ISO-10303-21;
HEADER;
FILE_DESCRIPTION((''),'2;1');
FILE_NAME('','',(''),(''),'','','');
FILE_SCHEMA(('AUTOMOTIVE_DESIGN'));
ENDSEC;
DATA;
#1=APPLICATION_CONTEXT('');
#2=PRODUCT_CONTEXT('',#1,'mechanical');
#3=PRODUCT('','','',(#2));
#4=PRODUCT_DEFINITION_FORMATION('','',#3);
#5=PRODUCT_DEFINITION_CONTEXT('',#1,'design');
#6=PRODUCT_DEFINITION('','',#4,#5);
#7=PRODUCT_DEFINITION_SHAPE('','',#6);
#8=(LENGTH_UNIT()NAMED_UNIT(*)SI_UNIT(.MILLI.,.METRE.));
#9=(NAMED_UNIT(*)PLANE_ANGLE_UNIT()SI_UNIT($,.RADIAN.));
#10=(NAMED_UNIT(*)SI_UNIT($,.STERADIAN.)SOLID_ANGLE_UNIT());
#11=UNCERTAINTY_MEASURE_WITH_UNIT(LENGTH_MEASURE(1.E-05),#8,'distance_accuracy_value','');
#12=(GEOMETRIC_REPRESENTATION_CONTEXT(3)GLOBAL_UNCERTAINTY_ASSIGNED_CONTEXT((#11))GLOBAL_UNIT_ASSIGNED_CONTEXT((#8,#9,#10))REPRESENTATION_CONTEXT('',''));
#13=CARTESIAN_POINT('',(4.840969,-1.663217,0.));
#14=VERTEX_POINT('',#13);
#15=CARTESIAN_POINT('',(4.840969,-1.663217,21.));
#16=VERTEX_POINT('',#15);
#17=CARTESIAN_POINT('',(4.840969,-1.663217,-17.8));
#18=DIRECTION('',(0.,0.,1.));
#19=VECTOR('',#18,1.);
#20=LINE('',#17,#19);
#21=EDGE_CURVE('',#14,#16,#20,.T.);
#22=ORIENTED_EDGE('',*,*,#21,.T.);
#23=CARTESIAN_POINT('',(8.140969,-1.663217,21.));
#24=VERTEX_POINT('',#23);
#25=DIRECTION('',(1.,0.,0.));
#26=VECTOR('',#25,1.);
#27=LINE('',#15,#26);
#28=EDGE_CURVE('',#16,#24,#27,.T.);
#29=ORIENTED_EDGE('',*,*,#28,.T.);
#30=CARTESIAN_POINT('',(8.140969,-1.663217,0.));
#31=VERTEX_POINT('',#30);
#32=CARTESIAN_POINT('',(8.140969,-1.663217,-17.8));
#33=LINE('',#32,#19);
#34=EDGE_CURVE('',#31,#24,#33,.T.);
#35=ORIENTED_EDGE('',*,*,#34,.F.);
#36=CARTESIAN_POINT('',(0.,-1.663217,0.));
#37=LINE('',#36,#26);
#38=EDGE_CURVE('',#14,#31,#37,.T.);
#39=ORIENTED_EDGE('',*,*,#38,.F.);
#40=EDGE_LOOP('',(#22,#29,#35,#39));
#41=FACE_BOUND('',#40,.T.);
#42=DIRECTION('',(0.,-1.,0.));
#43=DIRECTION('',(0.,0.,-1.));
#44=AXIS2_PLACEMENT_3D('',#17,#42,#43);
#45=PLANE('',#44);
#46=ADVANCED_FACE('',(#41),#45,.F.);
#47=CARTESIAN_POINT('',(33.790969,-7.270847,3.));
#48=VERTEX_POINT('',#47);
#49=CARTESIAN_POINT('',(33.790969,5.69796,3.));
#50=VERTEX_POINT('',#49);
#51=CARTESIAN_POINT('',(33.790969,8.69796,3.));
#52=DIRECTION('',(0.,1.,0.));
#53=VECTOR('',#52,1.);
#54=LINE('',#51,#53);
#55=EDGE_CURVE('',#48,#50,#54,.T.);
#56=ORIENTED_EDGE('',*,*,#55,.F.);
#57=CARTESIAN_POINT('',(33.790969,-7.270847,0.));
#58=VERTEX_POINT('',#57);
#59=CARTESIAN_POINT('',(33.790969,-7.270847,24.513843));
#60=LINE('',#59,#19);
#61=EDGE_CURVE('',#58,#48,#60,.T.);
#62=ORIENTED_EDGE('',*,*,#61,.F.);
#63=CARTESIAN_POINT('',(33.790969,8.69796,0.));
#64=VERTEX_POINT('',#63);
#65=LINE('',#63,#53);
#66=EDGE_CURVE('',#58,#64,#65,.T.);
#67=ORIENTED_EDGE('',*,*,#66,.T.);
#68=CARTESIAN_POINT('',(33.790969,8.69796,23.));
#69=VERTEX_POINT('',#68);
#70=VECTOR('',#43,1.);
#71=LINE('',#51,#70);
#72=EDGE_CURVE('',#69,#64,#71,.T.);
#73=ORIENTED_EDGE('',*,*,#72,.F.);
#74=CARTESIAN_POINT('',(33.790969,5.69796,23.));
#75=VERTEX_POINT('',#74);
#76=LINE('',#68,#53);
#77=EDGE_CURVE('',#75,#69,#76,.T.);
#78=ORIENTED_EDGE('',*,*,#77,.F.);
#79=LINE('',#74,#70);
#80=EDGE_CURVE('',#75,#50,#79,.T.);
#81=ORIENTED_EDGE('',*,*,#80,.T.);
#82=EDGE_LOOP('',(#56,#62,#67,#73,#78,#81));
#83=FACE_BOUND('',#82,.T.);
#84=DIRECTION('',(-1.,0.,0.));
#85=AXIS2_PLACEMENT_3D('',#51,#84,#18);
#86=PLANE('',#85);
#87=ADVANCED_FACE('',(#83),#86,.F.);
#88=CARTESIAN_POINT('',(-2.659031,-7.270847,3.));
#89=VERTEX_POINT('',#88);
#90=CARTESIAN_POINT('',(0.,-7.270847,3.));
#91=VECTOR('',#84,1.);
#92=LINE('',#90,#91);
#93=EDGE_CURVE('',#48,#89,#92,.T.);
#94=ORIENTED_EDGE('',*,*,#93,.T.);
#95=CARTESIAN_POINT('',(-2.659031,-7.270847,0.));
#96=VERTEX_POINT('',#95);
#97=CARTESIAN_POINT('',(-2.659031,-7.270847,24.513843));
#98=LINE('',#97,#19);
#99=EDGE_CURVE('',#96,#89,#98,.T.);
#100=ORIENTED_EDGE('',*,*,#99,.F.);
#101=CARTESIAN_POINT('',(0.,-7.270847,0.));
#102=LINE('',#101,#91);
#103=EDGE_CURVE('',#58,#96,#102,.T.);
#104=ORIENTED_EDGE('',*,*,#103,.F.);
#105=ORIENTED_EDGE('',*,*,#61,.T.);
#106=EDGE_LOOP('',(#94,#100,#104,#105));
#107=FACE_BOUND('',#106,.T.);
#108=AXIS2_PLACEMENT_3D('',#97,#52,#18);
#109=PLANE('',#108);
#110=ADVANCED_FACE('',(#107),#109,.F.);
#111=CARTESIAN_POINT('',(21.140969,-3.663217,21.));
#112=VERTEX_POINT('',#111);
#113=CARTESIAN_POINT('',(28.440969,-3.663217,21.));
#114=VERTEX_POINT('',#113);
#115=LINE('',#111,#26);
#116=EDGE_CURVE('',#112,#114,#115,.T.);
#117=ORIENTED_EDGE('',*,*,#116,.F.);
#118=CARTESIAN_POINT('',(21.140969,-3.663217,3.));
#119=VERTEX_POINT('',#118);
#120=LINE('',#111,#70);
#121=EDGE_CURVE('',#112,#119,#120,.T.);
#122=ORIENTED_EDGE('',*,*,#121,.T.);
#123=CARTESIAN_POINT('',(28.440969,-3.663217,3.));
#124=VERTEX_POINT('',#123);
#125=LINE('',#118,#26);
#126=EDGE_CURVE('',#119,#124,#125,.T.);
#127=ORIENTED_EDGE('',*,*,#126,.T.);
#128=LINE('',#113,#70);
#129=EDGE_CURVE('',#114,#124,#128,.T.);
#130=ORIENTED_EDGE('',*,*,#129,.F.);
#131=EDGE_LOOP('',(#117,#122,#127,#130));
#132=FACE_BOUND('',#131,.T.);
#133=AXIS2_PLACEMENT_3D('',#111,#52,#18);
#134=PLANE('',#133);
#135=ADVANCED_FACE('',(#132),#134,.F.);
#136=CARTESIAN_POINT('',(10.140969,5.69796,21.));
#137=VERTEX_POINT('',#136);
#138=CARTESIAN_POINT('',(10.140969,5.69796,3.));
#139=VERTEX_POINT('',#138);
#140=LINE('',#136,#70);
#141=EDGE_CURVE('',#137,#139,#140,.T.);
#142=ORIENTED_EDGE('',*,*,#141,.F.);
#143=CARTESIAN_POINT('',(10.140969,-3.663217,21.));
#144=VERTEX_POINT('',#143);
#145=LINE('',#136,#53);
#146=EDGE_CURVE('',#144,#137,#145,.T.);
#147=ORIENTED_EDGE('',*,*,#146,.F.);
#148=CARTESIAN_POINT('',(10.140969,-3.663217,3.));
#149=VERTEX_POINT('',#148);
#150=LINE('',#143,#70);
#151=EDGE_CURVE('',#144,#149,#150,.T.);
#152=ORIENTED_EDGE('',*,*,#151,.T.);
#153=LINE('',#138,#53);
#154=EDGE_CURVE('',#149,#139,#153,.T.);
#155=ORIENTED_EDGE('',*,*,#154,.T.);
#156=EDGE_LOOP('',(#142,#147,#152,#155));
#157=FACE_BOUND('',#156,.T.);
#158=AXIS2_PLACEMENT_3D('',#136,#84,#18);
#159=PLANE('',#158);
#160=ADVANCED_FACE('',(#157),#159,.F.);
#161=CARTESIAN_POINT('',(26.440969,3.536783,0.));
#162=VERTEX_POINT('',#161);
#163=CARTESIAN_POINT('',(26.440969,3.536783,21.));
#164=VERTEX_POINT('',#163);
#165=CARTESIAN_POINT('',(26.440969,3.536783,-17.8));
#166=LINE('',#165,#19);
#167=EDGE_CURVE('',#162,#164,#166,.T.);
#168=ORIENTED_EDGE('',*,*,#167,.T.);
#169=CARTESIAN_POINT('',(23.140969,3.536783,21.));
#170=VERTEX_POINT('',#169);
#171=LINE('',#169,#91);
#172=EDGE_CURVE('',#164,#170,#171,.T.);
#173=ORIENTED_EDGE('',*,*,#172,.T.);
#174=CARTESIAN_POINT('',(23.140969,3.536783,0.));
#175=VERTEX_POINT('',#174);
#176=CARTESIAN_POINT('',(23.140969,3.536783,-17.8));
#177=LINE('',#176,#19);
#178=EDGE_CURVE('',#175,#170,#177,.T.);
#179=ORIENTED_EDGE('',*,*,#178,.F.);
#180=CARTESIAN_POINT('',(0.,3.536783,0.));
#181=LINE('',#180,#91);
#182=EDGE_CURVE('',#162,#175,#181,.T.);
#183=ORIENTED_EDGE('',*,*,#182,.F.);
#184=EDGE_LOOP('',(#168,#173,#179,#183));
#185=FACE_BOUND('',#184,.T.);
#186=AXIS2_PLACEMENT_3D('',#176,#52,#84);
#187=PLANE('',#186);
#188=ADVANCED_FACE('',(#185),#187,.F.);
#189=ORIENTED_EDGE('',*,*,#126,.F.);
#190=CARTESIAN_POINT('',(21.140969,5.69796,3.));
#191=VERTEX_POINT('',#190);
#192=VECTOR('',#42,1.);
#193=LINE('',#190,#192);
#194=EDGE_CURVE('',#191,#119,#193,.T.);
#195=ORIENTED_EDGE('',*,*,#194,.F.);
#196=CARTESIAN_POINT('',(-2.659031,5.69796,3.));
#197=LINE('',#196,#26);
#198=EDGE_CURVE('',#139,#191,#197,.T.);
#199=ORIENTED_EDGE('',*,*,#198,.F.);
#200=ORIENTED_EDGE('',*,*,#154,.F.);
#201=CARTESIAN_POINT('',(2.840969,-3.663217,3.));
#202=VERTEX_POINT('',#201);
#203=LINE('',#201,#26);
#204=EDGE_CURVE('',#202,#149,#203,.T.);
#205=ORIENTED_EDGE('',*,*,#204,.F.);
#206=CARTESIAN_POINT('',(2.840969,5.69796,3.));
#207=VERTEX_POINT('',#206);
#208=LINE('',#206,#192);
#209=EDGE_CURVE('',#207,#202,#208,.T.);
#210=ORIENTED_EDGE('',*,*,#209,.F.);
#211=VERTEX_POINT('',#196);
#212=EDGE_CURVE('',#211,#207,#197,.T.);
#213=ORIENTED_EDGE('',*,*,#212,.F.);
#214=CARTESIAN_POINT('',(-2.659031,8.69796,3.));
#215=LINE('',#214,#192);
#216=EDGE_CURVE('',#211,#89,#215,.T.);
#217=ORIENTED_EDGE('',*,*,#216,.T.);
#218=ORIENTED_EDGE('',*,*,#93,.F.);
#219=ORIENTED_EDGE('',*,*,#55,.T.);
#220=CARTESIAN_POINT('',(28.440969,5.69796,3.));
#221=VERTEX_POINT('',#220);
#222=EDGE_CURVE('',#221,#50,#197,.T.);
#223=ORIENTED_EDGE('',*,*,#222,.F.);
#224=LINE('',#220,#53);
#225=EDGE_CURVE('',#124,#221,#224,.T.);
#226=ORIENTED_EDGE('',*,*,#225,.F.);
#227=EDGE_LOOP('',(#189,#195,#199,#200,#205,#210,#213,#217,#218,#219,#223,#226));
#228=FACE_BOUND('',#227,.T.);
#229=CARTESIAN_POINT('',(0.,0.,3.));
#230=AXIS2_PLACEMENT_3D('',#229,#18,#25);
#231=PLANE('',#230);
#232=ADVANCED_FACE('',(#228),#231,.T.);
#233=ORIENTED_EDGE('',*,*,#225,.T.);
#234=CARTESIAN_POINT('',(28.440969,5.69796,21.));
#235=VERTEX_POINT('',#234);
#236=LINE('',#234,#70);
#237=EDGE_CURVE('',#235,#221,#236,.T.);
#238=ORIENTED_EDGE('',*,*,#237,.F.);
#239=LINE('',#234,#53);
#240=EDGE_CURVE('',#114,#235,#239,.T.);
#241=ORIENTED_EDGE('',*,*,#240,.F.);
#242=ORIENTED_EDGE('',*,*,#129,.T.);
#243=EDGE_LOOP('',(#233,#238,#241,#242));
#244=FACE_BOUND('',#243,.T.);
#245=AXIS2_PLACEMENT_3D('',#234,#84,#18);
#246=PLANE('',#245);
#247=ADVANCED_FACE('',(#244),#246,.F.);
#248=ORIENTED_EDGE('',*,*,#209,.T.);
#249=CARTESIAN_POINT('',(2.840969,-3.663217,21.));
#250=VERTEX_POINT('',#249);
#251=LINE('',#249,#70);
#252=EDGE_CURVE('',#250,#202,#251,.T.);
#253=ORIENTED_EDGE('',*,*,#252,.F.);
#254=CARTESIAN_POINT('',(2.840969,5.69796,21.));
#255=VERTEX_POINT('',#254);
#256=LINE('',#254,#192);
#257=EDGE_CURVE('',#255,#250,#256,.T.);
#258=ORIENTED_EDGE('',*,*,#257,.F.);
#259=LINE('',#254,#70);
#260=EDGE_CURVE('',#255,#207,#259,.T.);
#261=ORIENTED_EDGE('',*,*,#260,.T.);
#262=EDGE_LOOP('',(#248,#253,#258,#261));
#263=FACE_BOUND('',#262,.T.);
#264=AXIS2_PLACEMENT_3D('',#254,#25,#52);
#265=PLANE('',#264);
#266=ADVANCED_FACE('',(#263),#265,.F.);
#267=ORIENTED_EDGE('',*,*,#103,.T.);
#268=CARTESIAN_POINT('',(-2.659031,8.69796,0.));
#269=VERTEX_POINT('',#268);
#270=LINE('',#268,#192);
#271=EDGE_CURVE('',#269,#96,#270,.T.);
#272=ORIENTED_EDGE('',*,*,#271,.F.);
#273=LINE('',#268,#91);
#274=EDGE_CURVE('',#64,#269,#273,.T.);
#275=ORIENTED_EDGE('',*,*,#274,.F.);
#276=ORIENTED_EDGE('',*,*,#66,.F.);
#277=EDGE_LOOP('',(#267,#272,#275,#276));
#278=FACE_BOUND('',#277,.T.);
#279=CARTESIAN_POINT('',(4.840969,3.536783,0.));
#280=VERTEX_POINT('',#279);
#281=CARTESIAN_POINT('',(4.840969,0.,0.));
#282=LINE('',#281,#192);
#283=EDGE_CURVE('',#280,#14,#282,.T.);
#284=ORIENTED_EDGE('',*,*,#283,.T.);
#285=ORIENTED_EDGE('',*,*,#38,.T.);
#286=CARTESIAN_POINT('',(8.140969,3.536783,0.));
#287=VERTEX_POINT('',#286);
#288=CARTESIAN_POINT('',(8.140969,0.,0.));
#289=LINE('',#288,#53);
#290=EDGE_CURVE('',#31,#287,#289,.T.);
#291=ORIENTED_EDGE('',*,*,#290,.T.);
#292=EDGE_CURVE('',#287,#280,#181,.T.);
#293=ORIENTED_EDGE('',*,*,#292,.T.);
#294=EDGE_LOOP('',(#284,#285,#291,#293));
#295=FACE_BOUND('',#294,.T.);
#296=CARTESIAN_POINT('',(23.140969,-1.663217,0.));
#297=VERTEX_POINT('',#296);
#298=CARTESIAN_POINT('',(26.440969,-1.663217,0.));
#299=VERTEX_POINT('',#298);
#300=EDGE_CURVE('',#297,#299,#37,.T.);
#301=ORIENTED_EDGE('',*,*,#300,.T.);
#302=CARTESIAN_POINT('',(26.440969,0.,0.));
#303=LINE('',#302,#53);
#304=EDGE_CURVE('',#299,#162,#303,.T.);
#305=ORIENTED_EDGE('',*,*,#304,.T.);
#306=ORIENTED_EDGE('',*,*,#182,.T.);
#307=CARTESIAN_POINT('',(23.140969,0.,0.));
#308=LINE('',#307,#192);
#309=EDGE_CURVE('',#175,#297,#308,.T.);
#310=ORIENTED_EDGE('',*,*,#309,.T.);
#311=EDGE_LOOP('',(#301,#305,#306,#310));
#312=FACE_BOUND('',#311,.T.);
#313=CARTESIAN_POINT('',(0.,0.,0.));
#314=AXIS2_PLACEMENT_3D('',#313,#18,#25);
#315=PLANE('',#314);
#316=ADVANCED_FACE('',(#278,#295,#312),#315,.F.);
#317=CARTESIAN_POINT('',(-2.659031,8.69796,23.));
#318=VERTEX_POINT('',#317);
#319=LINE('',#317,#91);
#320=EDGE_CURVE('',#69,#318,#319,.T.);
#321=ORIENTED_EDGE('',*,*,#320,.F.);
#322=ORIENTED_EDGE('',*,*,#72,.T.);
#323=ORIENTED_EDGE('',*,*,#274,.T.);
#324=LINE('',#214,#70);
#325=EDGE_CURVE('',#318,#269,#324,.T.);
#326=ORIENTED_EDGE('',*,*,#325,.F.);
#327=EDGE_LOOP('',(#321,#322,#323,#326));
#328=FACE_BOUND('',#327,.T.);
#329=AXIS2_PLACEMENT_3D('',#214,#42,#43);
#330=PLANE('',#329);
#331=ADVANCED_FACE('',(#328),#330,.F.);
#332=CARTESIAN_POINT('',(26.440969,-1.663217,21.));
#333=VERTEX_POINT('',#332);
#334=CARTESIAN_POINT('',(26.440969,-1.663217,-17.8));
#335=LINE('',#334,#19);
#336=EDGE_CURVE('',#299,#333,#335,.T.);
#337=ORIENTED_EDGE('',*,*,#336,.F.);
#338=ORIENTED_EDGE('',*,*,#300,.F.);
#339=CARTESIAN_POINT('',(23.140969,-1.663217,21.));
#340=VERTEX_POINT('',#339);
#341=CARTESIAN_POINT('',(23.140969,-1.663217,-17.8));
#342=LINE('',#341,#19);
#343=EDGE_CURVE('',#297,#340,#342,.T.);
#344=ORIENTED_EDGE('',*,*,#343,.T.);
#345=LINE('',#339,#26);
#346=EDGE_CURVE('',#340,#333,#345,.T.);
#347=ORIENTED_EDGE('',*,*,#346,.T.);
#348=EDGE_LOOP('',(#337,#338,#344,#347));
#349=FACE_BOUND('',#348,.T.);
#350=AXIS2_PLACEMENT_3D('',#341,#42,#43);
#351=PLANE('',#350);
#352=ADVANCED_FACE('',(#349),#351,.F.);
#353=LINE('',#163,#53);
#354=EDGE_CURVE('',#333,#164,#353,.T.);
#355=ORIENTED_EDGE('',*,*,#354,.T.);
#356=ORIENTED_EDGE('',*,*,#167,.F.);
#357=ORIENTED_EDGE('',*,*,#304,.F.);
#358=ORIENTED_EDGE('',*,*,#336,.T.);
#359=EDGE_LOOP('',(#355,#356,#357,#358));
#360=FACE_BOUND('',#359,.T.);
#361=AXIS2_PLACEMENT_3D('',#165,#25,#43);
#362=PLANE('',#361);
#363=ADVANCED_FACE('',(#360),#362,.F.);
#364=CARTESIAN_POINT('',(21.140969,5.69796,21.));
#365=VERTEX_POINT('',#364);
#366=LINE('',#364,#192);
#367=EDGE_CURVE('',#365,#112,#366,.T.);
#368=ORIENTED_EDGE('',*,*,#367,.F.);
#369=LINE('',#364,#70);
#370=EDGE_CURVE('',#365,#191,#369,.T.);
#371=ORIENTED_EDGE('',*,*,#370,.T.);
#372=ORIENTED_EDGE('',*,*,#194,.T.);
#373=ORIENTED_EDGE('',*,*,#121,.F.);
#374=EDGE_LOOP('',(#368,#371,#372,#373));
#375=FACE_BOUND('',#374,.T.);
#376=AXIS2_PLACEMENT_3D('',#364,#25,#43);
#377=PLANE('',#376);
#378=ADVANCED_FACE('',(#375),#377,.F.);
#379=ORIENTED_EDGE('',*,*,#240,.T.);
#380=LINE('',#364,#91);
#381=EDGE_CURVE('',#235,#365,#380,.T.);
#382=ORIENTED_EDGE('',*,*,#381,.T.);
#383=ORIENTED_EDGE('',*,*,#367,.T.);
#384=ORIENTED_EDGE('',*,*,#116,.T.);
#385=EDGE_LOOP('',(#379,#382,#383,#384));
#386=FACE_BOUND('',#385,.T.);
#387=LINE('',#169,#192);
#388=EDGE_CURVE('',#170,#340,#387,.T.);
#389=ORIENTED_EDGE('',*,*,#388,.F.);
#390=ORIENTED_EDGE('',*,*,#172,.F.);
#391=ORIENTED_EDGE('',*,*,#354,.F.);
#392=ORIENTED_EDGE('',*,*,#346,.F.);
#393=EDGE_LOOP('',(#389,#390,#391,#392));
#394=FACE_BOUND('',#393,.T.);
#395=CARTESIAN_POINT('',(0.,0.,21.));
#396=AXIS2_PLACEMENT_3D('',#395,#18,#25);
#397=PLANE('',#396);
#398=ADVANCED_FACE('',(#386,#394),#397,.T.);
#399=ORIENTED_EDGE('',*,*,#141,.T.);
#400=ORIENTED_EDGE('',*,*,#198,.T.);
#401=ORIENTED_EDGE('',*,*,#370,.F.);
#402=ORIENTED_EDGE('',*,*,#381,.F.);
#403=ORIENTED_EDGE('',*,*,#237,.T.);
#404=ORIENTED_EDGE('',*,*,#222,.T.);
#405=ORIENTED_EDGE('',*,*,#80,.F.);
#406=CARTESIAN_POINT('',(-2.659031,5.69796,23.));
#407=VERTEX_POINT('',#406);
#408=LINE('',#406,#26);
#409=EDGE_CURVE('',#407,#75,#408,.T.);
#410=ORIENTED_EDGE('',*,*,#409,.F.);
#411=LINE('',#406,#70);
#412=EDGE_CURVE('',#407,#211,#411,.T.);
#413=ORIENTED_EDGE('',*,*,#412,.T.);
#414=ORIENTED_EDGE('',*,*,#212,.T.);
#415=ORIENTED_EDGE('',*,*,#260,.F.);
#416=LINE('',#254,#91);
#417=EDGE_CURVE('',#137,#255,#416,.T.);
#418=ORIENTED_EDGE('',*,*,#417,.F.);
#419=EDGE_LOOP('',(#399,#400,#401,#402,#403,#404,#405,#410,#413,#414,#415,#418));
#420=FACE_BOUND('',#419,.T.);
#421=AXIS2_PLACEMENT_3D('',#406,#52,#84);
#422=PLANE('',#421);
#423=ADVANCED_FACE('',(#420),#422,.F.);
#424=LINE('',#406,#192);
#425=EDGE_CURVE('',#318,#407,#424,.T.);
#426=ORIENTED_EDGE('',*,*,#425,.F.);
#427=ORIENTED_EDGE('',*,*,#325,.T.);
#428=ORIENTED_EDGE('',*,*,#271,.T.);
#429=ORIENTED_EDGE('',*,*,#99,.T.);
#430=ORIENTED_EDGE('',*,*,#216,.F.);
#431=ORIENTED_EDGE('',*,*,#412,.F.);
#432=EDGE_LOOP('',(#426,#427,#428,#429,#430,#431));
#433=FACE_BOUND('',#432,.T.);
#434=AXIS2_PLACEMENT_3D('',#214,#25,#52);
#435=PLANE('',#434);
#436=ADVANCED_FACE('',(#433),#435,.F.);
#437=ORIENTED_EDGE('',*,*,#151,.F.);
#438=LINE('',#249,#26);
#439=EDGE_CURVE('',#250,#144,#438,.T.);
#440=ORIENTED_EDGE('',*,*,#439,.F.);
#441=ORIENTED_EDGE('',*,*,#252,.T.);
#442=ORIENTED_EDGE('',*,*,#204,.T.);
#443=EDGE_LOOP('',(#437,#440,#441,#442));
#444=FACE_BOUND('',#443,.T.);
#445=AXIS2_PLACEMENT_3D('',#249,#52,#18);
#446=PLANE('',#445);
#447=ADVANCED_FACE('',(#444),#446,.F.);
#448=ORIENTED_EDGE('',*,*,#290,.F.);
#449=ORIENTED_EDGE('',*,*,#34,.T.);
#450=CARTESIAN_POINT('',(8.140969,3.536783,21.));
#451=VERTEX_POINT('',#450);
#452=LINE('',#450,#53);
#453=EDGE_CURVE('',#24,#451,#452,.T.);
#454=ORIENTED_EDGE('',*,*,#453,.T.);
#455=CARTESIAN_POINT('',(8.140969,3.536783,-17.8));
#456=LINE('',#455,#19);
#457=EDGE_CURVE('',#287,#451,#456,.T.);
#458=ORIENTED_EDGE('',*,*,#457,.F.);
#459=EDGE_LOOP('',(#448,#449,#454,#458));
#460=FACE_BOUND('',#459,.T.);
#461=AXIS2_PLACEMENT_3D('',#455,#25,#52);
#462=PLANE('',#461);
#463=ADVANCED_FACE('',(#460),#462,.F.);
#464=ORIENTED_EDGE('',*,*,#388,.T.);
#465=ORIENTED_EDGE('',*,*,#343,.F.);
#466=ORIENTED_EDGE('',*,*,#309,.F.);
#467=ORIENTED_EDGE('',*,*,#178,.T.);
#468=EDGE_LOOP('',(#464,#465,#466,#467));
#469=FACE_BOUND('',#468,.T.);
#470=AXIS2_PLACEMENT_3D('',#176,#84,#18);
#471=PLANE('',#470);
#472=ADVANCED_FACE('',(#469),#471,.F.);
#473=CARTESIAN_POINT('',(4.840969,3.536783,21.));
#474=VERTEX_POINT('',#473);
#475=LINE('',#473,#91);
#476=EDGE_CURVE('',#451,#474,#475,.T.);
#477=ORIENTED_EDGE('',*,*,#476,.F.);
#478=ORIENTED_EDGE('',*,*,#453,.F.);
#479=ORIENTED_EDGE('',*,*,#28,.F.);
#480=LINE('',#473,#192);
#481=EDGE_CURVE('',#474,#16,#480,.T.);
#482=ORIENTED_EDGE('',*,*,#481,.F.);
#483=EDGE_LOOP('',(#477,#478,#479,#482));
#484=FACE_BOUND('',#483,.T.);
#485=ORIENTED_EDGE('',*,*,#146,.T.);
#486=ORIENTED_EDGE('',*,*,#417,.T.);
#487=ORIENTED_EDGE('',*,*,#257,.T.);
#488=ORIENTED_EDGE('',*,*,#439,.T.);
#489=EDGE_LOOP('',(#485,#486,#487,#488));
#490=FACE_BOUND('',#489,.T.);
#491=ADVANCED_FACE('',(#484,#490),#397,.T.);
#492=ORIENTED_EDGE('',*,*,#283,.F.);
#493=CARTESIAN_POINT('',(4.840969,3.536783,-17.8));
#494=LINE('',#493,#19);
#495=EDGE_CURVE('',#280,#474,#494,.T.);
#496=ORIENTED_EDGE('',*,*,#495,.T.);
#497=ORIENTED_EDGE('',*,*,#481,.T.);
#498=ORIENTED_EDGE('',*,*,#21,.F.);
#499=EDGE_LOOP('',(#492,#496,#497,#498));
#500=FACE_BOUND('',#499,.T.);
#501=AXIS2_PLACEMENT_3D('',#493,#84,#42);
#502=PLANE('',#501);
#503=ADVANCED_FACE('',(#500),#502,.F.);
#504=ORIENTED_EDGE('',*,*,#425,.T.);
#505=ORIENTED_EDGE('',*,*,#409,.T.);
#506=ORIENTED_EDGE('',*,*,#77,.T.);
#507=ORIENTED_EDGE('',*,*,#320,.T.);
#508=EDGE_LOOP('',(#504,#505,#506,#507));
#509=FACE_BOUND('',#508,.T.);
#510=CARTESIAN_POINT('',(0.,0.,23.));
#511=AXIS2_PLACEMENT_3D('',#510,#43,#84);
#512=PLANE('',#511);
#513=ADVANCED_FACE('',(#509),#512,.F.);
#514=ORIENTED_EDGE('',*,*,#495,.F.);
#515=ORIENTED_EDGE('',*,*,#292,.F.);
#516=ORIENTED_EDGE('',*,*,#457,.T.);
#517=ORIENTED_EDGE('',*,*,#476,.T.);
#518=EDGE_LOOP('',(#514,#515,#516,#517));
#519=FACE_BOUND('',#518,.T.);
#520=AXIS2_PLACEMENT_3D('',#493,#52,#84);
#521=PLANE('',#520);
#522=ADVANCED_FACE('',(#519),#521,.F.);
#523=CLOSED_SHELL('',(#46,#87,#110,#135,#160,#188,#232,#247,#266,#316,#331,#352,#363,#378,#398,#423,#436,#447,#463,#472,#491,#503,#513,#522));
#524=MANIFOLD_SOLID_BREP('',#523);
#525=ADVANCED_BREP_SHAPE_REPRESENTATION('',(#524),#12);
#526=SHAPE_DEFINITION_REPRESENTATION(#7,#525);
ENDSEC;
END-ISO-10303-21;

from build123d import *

# Parameters (mm, degrees)
SKETCH1_W              = 36.45
SKETCH1_H              = 25.4
BOSS_EXTRUDE1_DEPTH    = 3
CUT_EXTRUDE2_START     = -3
CUT_EXTRUDE2_OUTLINE_W = 3.3
CUT_EXTRUDE2_OUTLINE_H = 5.2
CUT_EXTRUDE2_DEPTH     = 3
SKETCH2_W              = 36.45
SKETCH2_H              = 3
BOSS_EXTRUDE3_DEPTH    = 20
SKETCH5_W              = 7.3
SKETCH5_H              = 9.361177697
SKETCH5_W_2            = 3.3
SKETCH5_H_2            = 5.2
BOSS_EXTRUDE4_DEPTH    = 18
SKETCH8_W              = 29.52669185
SKETCH8_H              = 10.957410593
CUT_EXTRUDE4_DEPTH     = 47.222944791


# Read off the part's stored shape, not the designer's step: Cut-Extrude2
with BuildPart() as part:
    # Sketch1 → Boss-Extrude1 (new body)
    with BuildSketch(Plane.XY):
        with Locations((15.565968828, -4.002039549)):
            Rectangle(SKETCH1_W, SKETCH1_H)
    extrude(amount=BOSS_EXTRUDE1_DEPTH)

    # Cut-Extrude2 outline → Cut-Extrude2 (cut)
    with BuildSketch(Plane.XY.offset(3).offset(CUT_EXTRUDE2_START)):
        with Locations((24.790968828, 0.936782754)):
            Rectangle(CUT_EXTRUDE2_OUTLINE_W, CUT_EXTRUDE2_OUTLINE_H)
        with Locations((6.490968828, 0.936782754)):
            Rectangle(CUT_EXTRUDE2_OUTLINE_W, CUT_EXTRUDE2_OUTLINE_H)
    extrude(amount=CUT_EXTRUDE2_DEPTH, mode=Mode.SUBTRACT)

    # Sketch2 → Boss-Extrude3 (add)
    with BuildSketch(Plane.XY.offset(3)):
        with Locations((15.565968828, 7.197960451)):
            Rectangle(SKETCH2_W, SKETCH2_H)
        with Locations((15.565968828, -15.202039549)):
            Rectangle(SKETCH2_W, SKETCH2_H)
    extrude(amount=BOSS_EXTRUDE3_DEPTH)

    # Sketch5 → Boss-Extrude4 (add)
    # profile 1 of 2: a face of its own
    with BuildSketch(Plane.XY.offset(3)):
        with Locations((6.490968828, 1.017371602)):
            Rectangle(SKETCH5_W, SKETCH5_H)
        with Locations((6.490968828, 0.936782754)):
            Rectangle(SKETCH5_W_2, SKETCH5_H_2, mode=Mode.SUBTRACT)
    # profile 2 of 2: a face of its own
    with BuildSketch(Plane.XY.offset(3)):
        with Locations((24.790968828, 1.017371602)):
            Rectangle(SKETCH5_W, SKETCH5_H)
        with Locations((24.790968828, 0.936782754)):
            Rectangle(SKETCH5_W_2, SKETCH5_H_2, mode=Mode.SUBTRACT)
    extrude(amount=BOSS_EXTRUDE4_DEPTH)

    # Sketch8 → Cut-Extrude4 (cut, through all)
    with BuildSketch(Plane(origin=(33.790968828, 0, 0), x_dir=(0, 0, -1), z_dir=(1, 0, 0))):
        with Locations((-9.750497468, -12.749552208)):
            Rectangle(SKETCH8_W, SKETCH8_H)
    extrude(amount=-CUT_EXTRUDE4_DEPTH, mode=Mode.SUBTRACT)


solid = part.part
